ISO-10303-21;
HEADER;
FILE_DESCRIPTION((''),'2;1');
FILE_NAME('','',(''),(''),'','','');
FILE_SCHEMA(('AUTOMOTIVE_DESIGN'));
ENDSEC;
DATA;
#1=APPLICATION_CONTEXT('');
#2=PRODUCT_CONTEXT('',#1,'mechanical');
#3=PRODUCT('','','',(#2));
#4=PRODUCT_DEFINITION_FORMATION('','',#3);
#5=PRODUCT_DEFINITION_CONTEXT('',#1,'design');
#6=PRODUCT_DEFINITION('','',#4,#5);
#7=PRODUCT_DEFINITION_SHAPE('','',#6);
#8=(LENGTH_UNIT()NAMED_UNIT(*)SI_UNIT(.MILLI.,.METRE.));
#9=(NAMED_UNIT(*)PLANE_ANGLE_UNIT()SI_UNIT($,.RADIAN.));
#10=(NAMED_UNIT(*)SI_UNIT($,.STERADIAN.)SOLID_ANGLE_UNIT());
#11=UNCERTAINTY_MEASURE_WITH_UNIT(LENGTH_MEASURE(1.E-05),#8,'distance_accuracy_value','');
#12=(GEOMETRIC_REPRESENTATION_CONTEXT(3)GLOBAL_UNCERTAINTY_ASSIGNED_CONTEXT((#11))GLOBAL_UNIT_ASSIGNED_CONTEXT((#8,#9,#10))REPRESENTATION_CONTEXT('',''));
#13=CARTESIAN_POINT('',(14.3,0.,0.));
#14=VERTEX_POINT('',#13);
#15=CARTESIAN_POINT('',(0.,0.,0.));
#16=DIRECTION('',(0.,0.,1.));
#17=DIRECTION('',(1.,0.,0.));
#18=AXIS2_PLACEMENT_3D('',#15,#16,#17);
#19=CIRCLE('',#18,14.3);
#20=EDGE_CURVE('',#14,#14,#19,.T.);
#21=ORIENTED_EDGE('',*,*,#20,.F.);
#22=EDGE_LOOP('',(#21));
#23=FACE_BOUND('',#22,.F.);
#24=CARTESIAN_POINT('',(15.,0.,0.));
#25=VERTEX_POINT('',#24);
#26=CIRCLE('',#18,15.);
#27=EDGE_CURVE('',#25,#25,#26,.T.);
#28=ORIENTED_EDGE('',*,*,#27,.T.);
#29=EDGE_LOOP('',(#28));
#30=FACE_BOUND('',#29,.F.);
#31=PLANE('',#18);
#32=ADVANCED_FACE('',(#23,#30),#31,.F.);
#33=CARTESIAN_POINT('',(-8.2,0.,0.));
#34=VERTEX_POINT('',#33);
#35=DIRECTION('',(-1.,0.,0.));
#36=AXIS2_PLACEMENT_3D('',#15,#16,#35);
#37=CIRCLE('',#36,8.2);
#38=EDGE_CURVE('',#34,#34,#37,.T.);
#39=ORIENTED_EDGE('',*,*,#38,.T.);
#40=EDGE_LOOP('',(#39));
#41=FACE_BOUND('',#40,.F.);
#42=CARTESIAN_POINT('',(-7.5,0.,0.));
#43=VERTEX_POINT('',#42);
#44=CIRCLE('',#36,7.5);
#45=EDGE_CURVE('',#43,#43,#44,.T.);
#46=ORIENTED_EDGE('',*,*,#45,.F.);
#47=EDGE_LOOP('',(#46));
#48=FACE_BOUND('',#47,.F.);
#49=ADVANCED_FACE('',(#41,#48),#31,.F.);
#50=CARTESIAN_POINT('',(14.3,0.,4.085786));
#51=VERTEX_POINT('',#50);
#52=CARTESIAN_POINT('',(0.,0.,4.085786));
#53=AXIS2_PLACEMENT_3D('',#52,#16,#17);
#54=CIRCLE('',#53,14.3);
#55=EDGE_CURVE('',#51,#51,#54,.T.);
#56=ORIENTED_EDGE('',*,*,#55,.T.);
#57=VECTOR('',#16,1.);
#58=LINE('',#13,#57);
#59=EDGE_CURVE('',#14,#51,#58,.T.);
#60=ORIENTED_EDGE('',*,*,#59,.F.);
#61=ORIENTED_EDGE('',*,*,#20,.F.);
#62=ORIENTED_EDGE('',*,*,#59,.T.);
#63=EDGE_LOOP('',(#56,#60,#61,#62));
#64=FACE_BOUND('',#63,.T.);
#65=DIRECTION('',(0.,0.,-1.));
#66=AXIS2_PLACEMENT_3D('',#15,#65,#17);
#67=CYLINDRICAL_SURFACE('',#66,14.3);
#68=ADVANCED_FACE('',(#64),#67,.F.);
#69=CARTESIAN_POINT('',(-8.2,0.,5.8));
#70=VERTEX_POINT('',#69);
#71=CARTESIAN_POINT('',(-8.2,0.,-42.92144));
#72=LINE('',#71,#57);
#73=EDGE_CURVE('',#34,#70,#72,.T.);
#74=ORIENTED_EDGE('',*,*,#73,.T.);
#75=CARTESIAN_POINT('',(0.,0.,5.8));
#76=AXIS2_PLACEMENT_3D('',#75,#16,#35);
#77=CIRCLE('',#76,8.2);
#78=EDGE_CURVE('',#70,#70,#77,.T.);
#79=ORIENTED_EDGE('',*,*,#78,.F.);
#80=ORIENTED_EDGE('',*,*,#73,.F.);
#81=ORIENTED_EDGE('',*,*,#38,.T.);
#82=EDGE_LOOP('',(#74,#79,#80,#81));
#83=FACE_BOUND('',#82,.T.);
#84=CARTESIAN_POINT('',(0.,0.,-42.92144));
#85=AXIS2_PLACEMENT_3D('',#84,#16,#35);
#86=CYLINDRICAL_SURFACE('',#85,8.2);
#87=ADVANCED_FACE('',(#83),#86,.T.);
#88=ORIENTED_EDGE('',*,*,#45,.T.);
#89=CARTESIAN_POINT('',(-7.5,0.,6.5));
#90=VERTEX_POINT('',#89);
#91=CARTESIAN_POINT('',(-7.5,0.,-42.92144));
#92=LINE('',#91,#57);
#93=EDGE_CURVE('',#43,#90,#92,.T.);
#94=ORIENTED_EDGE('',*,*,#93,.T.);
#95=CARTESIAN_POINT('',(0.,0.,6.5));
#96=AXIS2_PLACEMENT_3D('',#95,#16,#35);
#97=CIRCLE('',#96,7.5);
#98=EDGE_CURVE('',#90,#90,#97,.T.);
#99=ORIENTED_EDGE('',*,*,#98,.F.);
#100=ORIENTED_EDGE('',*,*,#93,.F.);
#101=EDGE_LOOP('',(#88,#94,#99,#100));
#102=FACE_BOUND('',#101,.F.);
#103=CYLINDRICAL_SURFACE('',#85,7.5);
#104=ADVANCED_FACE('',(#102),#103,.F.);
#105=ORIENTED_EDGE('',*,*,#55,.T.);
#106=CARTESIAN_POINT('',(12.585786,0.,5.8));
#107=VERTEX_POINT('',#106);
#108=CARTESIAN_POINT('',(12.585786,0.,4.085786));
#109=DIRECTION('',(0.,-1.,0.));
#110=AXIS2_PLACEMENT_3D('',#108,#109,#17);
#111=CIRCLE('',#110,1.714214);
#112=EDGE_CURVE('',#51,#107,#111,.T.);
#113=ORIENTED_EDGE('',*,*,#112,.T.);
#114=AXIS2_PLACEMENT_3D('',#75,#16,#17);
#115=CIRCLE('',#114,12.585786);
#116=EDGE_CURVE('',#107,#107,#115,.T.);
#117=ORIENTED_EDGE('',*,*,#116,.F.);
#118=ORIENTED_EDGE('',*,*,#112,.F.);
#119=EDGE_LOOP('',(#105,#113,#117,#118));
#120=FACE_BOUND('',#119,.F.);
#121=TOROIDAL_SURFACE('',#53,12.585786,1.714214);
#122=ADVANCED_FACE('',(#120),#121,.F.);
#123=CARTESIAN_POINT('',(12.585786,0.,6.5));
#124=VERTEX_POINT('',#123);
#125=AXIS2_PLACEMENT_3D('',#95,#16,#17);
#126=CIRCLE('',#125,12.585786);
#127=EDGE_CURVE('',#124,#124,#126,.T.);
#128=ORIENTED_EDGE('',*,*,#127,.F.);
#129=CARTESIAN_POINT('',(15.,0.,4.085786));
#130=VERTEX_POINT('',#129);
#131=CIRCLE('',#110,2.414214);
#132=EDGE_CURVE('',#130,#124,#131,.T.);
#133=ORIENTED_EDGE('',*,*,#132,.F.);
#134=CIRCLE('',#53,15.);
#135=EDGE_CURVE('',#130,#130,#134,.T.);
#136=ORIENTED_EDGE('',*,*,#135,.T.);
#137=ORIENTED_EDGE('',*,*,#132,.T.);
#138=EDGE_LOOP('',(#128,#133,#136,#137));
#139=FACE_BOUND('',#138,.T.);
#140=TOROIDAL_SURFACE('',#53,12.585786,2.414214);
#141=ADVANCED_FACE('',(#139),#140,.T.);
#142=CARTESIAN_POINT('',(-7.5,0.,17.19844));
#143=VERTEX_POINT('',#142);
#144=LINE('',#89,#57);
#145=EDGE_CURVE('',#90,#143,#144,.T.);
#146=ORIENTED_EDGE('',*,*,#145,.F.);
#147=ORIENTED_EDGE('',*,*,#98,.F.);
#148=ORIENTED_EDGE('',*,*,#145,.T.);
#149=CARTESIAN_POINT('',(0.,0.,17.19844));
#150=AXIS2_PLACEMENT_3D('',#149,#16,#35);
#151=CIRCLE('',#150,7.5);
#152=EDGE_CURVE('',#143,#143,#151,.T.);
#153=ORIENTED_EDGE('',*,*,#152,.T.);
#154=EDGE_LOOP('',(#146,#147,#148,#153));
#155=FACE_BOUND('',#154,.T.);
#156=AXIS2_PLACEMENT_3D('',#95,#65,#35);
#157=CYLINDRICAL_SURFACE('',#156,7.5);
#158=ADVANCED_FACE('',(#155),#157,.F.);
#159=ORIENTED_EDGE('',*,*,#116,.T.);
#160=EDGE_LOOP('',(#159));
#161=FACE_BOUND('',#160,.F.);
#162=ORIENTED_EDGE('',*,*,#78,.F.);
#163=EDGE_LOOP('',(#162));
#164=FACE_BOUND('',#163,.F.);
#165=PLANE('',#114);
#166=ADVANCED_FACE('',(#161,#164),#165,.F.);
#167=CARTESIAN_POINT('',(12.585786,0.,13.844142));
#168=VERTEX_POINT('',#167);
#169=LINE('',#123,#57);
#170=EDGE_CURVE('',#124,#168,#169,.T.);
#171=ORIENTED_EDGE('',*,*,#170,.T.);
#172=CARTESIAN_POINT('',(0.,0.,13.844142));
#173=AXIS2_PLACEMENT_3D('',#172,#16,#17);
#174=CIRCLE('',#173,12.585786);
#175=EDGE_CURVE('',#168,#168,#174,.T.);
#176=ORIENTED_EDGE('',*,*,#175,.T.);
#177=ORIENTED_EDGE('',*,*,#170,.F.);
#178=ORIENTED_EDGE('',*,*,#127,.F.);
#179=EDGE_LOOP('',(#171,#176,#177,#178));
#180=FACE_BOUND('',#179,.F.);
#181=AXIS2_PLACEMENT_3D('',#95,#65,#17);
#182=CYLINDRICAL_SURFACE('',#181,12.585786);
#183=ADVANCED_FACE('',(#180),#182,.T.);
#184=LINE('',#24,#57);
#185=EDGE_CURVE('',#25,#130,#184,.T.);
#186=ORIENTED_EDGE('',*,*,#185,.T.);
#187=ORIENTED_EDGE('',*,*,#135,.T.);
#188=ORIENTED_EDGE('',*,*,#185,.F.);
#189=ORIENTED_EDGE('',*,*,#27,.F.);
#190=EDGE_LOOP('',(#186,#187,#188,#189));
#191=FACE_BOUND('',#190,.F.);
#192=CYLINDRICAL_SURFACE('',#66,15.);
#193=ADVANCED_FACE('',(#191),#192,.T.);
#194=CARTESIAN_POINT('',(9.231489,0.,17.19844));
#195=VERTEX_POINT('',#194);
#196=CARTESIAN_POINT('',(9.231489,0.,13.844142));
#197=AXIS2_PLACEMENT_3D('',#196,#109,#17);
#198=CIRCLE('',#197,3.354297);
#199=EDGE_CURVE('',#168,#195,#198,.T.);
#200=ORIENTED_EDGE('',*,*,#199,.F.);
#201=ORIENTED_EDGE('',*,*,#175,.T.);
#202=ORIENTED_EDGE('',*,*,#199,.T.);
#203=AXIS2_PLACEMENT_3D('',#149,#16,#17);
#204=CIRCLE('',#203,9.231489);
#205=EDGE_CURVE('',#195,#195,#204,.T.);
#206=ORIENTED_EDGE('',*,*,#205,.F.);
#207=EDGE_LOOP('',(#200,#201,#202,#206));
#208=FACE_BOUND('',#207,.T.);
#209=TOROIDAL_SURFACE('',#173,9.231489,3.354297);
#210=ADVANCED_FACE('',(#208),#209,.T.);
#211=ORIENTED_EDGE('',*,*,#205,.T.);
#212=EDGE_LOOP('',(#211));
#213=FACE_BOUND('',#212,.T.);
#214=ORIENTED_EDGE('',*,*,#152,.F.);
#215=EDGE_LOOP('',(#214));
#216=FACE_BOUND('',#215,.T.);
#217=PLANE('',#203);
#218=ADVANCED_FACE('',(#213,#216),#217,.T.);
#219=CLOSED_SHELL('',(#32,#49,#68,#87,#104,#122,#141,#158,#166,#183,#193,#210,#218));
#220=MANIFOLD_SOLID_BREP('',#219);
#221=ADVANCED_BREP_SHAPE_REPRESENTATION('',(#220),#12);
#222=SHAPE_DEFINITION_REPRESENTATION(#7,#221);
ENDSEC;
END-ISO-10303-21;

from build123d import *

# Parameters (mm, degrees)
F0_R     = 15
F1_DEPTH = 6.5
F2_R     = 2.4142135624
F4_D     = 15
F5_T     = -0.7
F7_DEPTH = 10.6984395534
F8_R     = 3.3542973282


with BuildPart() as f1:
    # F0 (on Top) → F1 (new body)
    with BuildSketch(Plane.XY):
        Circle(F0_R)
    extrude(amount=F1_DEPTH)

    # F2
    f2_edges = [f1.edges().sort_by_distance(p)[0] for p in [
        (-15, 0, 6.5),
    ]]
    fillet(f2_edges, radius=F2_R)

    # F4 (through all)
    with Locations(Plane(origin=(0, 0, 0), x_dir=(1, 0, 0), z_dir=(0, 0, -1))):
        with Locations((0, 0)):
            Hole(F4_D / 2)

    # F5
    f5_openings = [f1.faces().sort_by_distance(p)[0] for p in [
        (-14.575736, 0, 0),
    ]]
    offset(amount=F5_T, openings=f5_openings)

    # F7 (add): a face of the model
    f7_faces = [f1.faces().sort_by_distance(p)[0] for p in [
        (-12.2298066402, 0, 6.5),
    ]]
    extrude(f7_faces, amount=F7_DEPTH)

    # F8
    f8_edges = [f1.edges().sort_by_distance(p)[0] for p in [
        (-12.585786, 0, 17.19844),
    ]]
    fillet(f8_edges, radius=F8_R)


solid = f1.part
